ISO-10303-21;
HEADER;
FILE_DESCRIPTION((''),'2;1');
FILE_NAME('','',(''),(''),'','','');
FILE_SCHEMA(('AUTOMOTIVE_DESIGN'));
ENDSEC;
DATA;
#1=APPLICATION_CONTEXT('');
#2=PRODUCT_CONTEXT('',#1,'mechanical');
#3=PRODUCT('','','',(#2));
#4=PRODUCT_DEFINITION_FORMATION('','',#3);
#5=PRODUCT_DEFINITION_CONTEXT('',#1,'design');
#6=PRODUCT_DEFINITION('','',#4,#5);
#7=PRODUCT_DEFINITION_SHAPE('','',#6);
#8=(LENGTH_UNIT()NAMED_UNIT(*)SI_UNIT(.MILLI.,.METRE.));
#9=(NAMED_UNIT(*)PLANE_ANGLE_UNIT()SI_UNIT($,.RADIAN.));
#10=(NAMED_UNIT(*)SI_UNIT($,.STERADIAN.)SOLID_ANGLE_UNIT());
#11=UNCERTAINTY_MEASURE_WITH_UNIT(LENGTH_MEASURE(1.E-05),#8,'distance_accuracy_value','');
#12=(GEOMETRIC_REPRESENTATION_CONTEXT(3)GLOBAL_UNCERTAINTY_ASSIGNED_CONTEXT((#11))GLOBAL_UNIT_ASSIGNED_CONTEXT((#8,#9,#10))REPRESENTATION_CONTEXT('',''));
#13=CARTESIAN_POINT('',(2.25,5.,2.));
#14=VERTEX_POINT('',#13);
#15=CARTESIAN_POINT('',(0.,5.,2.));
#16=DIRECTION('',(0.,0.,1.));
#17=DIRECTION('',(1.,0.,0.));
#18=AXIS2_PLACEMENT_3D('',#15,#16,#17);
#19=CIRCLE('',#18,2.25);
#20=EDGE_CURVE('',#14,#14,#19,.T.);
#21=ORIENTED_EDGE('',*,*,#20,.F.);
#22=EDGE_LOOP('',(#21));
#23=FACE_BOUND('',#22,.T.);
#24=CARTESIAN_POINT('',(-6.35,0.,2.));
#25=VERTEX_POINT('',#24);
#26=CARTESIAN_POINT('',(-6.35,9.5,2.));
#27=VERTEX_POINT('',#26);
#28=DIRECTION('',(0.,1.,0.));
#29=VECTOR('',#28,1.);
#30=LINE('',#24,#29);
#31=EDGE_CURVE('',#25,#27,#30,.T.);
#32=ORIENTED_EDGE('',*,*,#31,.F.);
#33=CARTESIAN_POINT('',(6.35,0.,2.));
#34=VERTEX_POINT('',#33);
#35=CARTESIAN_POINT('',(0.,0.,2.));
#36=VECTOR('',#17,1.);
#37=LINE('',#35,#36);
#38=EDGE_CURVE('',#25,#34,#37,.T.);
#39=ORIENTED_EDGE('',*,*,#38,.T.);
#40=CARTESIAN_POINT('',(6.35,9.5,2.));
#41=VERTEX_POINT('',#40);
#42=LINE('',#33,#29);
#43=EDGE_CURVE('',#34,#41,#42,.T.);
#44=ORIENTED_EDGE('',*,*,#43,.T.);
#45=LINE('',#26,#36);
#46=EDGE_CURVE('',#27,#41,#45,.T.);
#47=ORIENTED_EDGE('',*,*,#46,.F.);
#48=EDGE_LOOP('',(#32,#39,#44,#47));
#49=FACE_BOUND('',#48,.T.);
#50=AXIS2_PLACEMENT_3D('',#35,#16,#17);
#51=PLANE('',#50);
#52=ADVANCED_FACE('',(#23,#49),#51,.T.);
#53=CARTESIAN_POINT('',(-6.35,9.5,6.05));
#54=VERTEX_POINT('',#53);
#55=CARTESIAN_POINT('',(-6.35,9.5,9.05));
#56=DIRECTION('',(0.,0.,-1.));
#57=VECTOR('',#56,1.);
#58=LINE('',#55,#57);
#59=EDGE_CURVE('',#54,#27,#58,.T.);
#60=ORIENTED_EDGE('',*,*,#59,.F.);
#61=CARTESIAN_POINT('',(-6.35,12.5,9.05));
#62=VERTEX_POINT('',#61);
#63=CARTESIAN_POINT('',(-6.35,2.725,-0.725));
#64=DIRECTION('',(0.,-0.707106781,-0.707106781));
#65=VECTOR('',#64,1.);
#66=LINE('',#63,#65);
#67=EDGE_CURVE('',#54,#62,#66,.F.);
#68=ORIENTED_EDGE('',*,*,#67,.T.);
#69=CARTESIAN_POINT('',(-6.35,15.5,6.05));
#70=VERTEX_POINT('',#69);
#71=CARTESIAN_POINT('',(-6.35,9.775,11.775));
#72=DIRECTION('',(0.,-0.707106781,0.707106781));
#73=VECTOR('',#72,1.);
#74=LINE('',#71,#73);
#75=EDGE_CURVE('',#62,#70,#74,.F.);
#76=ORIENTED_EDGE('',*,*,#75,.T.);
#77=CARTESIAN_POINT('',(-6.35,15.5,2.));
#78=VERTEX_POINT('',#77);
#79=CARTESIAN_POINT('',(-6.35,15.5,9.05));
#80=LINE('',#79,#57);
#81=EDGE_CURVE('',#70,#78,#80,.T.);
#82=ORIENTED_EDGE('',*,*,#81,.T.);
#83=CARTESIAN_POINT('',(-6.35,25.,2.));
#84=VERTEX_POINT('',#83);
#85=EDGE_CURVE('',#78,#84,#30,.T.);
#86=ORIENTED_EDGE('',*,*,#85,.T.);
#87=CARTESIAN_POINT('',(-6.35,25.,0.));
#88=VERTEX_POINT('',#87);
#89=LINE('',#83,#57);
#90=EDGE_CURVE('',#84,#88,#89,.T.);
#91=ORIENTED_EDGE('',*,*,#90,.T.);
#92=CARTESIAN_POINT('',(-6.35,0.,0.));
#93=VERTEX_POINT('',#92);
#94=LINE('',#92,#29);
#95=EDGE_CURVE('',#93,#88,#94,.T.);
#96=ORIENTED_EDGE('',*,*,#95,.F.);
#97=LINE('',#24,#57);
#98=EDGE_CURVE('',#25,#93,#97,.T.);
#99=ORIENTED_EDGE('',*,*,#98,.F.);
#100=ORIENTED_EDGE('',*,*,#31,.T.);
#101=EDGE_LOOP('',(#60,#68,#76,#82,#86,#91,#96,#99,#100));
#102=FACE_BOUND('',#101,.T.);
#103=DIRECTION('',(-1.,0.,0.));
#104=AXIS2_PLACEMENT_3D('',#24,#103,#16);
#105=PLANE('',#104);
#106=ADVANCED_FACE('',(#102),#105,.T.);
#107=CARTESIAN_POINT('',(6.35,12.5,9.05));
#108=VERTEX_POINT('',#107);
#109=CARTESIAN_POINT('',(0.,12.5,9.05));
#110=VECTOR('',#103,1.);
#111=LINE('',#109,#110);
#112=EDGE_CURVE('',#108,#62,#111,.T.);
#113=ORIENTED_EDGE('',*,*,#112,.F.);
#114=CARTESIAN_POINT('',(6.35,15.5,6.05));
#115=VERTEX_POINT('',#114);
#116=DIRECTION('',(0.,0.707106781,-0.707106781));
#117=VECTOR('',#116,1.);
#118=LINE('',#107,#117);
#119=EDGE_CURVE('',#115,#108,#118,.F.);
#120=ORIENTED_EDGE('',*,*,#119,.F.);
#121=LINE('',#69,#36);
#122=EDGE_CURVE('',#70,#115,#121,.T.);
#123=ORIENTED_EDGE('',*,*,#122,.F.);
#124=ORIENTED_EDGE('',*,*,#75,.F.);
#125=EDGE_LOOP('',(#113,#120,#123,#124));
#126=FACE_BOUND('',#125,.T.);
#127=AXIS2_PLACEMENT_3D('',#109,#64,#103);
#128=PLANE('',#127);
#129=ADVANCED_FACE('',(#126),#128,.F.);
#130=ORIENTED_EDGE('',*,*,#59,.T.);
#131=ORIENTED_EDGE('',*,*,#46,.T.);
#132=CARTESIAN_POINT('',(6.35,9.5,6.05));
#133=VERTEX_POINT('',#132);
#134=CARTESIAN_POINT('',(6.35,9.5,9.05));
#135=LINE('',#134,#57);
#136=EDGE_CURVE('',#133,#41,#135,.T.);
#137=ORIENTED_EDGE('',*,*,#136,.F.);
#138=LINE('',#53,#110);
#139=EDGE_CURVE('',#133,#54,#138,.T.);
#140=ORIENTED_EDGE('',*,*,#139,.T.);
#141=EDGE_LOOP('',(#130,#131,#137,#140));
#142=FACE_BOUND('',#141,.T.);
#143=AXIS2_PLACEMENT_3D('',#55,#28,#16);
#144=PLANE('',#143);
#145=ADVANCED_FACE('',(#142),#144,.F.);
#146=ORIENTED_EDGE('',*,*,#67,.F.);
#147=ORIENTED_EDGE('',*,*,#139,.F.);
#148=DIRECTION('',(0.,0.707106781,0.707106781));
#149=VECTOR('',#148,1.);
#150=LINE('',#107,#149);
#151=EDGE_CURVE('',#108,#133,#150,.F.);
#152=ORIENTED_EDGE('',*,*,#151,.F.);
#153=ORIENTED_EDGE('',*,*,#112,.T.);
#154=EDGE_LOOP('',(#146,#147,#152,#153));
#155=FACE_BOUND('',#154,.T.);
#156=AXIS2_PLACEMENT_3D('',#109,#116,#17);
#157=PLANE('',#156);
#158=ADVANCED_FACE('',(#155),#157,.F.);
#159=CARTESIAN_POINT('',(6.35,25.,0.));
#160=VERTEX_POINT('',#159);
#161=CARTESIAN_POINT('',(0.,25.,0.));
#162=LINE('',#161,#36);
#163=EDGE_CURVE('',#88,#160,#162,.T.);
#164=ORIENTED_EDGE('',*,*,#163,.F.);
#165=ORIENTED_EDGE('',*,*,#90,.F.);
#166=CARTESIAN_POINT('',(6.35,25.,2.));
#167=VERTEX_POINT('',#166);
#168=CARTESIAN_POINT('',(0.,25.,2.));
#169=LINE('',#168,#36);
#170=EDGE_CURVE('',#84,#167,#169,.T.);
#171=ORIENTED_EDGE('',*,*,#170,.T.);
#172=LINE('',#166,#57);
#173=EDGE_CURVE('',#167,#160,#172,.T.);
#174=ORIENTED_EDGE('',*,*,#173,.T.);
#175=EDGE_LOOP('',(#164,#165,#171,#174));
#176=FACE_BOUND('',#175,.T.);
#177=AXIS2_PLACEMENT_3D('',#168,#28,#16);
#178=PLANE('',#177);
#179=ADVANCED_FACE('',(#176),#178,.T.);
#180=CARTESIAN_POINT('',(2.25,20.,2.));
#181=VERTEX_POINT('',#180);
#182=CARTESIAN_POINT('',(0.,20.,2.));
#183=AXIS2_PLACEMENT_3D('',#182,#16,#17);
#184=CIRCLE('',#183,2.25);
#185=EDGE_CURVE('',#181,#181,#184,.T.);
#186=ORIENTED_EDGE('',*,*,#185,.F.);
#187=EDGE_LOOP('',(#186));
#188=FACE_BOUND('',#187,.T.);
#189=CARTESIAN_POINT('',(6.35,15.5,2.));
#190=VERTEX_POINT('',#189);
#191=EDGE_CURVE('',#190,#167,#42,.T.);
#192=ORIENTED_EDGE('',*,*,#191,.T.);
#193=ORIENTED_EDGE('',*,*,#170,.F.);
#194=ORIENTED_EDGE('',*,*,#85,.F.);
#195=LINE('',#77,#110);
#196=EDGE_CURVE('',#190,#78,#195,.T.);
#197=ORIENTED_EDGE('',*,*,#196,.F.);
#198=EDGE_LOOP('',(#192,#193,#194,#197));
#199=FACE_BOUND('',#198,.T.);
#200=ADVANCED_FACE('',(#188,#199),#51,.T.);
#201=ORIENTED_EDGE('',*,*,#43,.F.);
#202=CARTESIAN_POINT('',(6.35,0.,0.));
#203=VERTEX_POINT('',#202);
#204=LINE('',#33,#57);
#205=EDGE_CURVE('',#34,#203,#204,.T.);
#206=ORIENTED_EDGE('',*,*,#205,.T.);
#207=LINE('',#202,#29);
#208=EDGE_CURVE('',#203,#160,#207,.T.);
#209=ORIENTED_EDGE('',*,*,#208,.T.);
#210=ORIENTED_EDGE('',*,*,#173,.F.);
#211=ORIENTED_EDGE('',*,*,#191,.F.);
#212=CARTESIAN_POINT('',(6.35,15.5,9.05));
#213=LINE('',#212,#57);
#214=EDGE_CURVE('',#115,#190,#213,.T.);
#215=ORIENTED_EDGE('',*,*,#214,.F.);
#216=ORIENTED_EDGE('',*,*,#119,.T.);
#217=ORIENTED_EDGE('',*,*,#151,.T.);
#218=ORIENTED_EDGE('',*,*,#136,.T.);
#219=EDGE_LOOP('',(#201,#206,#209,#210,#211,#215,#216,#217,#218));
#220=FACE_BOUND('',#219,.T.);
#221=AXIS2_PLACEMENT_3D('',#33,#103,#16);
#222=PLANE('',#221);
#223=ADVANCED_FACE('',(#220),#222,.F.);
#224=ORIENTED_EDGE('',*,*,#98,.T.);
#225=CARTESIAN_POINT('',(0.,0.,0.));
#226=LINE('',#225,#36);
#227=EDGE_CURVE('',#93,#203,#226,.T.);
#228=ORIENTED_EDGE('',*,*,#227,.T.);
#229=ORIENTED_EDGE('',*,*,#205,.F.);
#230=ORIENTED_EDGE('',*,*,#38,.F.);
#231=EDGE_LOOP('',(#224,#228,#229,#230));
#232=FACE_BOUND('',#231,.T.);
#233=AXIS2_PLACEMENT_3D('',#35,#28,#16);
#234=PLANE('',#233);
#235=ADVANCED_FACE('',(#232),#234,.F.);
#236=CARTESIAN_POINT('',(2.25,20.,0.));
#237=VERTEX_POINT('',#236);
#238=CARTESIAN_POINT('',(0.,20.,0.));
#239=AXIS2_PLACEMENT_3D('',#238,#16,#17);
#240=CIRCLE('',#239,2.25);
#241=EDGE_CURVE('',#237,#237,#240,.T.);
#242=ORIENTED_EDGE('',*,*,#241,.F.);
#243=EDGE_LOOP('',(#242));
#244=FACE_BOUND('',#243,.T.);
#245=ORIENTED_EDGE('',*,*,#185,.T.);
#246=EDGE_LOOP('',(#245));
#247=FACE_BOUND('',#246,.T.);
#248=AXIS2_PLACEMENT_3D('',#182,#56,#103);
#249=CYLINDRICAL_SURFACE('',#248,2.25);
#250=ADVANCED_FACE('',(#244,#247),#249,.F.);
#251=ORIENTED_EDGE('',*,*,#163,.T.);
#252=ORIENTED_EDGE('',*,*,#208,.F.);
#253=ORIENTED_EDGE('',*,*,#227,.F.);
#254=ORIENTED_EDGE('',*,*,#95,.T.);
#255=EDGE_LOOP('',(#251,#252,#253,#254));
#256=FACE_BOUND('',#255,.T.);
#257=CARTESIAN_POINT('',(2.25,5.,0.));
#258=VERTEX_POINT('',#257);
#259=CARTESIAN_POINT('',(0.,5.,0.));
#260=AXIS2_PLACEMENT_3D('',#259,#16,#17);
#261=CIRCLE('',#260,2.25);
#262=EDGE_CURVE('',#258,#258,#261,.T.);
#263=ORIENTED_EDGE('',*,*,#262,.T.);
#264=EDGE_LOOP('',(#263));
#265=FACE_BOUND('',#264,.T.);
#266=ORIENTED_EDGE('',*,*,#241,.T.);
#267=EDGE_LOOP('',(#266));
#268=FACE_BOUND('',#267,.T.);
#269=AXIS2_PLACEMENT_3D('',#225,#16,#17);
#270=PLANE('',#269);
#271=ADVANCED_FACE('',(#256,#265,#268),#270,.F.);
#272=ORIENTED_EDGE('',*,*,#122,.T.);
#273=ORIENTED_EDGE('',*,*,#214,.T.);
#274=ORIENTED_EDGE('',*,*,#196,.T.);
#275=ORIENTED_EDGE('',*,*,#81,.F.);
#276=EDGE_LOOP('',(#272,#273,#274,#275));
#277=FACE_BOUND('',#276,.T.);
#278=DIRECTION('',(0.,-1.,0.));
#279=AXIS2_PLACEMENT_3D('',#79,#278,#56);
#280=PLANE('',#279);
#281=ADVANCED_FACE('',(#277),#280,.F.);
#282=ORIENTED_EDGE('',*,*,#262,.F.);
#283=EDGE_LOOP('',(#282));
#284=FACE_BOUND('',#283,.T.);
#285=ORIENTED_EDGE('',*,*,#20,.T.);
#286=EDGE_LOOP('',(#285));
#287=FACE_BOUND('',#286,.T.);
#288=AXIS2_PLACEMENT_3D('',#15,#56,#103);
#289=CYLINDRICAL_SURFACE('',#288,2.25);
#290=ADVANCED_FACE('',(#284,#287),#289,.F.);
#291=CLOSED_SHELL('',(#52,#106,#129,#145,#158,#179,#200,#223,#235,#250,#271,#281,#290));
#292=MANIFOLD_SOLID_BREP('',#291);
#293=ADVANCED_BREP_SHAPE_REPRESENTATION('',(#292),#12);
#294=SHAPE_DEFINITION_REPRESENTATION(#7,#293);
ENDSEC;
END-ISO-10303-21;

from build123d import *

# Parameters (mm, degrees)
SKETCH2_W           = 12.7
SKETCH2_H           = 25
SKETCH2_R           = 2.25
BOSS_EXTRUDE1_DEPTH = 2
SKETCH3_W           = 12.7
SKETCH3_H           = 6
BOSS_EXTRUDE2_DEPTH = 7.05
CHAMFER1_SIZE       = 3


with BuildPart() as part:
    # Sketch2 → Boss-Extrude1 (new body)
    with BuildSketch(Plane.XY):
        with Locations((0, 12.5)):
            Rectangle(SKETCH2_W, SKETCH2_H)
        with Locations((0, 5)):
            Circle(SKETCH2_R, mode=Mode.SUBTRACT)
        with Locations((0, 20)):
            Circle(SKETCH2_R, mode=Mode.SUBTRACT)
    extrude(amount=BOSS_EXTRUDE1_DEPTH)

    # Sketch3 → Boss-Extrude2 (add)
    with BuildSketch(Plane.XY.offset(2)):
        with Locations((0, 12.5)):
            Rectangle(SKETCH3_W, SKETCH3_H)
    extrude(amount=BOSS_EXTRUDE2_DEPTH)

    # Chamfer1
    chamfer1_edges = [part.edges().sort_by_distance(p)[0] for p in [
        (0, 9.5, 9.05),
        (0, 15.5, 9.05),
    ]]
    chamfer(chamfer1_edges, length=CHAMFER1_SIZE - 0.0001)  # a hair under: the kernel refuses the full size


solid = part.part
